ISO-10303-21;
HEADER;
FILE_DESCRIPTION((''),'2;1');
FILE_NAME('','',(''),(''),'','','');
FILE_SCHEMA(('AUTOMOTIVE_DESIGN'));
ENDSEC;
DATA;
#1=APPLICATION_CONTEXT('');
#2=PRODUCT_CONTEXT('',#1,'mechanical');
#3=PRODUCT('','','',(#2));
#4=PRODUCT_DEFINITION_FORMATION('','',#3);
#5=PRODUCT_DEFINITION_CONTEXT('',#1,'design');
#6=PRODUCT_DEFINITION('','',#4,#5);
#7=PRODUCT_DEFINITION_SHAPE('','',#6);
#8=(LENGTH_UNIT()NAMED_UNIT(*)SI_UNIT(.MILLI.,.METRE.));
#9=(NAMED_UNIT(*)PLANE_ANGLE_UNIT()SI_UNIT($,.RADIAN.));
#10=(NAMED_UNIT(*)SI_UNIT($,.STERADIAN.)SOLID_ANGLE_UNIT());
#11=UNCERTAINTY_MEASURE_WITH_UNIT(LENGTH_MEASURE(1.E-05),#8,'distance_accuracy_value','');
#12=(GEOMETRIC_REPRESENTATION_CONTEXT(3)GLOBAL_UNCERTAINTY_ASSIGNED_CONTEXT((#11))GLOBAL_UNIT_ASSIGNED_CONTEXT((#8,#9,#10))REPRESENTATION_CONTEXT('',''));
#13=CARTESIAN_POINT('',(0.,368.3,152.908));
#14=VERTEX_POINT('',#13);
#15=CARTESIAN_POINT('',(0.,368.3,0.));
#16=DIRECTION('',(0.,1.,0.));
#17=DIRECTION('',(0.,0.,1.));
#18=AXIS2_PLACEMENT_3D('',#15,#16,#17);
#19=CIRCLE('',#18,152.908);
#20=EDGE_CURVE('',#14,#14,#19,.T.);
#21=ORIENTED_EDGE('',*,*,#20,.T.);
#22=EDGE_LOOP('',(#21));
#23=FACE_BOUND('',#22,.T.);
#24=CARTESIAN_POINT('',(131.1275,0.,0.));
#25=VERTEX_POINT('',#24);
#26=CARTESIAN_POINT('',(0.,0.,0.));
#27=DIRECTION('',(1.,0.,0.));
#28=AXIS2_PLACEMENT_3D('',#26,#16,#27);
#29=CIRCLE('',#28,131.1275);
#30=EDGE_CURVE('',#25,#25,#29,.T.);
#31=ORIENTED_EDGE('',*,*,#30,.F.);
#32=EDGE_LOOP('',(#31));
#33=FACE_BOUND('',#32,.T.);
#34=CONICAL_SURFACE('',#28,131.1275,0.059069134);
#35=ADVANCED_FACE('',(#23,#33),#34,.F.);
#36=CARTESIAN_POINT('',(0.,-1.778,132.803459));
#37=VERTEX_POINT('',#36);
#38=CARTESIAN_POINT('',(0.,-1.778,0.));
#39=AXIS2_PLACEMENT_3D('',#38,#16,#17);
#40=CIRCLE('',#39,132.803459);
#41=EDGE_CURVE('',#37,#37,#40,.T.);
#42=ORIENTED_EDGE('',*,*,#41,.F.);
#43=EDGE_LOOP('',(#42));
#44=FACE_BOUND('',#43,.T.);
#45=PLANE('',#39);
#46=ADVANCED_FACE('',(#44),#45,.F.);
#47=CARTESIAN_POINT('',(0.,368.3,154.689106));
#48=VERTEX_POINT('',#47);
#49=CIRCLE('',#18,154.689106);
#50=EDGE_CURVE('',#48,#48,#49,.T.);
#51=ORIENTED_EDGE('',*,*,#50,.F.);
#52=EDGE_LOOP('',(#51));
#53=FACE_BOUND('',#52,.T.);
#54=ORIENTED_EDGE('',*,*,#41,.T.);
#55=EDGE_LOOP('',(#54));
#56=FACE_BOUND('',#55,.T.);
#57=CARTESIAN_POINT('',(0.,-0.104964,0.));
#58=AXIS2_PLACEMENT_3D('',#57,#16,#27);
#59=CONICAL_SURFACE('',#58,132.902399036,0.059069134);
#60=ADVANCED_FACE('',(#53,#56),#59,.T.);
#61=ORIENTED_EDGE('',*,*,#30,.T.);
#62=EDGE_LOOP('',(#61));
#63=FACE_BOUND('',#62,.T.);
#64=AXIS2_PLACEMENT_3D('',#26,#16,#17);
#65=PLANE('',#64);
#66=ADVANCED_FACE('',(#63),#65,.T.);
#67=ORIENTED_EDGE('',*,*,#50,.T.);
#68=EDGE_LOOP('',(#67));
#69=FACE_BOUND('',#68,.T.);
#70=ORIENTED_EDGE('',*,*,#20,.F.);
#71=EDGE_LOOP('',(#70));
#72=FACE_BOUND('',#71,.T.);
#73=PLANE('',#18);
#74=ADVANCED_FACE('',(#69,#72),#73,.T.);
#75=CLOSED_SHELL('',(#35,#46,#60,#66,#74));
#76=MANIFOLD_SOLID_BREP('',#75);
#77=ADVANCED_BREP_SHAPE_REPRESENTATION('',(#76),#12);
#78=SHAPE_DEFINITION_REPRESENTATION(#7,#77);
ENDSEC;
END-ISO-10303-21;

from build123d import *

# Parameters (mm, degrees)
SHELL1_T = 1.778


# Read off the part's stored shape, not the designer's step: Extrude-Thin1
with BuildPart() as part:
    # Extrude-Thin1 outline → Extrude-Thin1 (revolve)
    with BuildSketch(Plane.XY):
        Polygon((0, 368.3), (0, 0), (131.1275, 0), (152.908, 368.3), align=None)
    revolve(axis=Axis((0, 0, 0), (0, 1, 0)))

    # Shell1
    shell1_openings = [part.faces().sort_by_distance(p)[0] for p in [
        (0, 368.3, 0),
    ]]
    offset(amount=SHELL1_T, openings=shell1_openings, kind=Kind.INTERSECTION)


solid = part.part
